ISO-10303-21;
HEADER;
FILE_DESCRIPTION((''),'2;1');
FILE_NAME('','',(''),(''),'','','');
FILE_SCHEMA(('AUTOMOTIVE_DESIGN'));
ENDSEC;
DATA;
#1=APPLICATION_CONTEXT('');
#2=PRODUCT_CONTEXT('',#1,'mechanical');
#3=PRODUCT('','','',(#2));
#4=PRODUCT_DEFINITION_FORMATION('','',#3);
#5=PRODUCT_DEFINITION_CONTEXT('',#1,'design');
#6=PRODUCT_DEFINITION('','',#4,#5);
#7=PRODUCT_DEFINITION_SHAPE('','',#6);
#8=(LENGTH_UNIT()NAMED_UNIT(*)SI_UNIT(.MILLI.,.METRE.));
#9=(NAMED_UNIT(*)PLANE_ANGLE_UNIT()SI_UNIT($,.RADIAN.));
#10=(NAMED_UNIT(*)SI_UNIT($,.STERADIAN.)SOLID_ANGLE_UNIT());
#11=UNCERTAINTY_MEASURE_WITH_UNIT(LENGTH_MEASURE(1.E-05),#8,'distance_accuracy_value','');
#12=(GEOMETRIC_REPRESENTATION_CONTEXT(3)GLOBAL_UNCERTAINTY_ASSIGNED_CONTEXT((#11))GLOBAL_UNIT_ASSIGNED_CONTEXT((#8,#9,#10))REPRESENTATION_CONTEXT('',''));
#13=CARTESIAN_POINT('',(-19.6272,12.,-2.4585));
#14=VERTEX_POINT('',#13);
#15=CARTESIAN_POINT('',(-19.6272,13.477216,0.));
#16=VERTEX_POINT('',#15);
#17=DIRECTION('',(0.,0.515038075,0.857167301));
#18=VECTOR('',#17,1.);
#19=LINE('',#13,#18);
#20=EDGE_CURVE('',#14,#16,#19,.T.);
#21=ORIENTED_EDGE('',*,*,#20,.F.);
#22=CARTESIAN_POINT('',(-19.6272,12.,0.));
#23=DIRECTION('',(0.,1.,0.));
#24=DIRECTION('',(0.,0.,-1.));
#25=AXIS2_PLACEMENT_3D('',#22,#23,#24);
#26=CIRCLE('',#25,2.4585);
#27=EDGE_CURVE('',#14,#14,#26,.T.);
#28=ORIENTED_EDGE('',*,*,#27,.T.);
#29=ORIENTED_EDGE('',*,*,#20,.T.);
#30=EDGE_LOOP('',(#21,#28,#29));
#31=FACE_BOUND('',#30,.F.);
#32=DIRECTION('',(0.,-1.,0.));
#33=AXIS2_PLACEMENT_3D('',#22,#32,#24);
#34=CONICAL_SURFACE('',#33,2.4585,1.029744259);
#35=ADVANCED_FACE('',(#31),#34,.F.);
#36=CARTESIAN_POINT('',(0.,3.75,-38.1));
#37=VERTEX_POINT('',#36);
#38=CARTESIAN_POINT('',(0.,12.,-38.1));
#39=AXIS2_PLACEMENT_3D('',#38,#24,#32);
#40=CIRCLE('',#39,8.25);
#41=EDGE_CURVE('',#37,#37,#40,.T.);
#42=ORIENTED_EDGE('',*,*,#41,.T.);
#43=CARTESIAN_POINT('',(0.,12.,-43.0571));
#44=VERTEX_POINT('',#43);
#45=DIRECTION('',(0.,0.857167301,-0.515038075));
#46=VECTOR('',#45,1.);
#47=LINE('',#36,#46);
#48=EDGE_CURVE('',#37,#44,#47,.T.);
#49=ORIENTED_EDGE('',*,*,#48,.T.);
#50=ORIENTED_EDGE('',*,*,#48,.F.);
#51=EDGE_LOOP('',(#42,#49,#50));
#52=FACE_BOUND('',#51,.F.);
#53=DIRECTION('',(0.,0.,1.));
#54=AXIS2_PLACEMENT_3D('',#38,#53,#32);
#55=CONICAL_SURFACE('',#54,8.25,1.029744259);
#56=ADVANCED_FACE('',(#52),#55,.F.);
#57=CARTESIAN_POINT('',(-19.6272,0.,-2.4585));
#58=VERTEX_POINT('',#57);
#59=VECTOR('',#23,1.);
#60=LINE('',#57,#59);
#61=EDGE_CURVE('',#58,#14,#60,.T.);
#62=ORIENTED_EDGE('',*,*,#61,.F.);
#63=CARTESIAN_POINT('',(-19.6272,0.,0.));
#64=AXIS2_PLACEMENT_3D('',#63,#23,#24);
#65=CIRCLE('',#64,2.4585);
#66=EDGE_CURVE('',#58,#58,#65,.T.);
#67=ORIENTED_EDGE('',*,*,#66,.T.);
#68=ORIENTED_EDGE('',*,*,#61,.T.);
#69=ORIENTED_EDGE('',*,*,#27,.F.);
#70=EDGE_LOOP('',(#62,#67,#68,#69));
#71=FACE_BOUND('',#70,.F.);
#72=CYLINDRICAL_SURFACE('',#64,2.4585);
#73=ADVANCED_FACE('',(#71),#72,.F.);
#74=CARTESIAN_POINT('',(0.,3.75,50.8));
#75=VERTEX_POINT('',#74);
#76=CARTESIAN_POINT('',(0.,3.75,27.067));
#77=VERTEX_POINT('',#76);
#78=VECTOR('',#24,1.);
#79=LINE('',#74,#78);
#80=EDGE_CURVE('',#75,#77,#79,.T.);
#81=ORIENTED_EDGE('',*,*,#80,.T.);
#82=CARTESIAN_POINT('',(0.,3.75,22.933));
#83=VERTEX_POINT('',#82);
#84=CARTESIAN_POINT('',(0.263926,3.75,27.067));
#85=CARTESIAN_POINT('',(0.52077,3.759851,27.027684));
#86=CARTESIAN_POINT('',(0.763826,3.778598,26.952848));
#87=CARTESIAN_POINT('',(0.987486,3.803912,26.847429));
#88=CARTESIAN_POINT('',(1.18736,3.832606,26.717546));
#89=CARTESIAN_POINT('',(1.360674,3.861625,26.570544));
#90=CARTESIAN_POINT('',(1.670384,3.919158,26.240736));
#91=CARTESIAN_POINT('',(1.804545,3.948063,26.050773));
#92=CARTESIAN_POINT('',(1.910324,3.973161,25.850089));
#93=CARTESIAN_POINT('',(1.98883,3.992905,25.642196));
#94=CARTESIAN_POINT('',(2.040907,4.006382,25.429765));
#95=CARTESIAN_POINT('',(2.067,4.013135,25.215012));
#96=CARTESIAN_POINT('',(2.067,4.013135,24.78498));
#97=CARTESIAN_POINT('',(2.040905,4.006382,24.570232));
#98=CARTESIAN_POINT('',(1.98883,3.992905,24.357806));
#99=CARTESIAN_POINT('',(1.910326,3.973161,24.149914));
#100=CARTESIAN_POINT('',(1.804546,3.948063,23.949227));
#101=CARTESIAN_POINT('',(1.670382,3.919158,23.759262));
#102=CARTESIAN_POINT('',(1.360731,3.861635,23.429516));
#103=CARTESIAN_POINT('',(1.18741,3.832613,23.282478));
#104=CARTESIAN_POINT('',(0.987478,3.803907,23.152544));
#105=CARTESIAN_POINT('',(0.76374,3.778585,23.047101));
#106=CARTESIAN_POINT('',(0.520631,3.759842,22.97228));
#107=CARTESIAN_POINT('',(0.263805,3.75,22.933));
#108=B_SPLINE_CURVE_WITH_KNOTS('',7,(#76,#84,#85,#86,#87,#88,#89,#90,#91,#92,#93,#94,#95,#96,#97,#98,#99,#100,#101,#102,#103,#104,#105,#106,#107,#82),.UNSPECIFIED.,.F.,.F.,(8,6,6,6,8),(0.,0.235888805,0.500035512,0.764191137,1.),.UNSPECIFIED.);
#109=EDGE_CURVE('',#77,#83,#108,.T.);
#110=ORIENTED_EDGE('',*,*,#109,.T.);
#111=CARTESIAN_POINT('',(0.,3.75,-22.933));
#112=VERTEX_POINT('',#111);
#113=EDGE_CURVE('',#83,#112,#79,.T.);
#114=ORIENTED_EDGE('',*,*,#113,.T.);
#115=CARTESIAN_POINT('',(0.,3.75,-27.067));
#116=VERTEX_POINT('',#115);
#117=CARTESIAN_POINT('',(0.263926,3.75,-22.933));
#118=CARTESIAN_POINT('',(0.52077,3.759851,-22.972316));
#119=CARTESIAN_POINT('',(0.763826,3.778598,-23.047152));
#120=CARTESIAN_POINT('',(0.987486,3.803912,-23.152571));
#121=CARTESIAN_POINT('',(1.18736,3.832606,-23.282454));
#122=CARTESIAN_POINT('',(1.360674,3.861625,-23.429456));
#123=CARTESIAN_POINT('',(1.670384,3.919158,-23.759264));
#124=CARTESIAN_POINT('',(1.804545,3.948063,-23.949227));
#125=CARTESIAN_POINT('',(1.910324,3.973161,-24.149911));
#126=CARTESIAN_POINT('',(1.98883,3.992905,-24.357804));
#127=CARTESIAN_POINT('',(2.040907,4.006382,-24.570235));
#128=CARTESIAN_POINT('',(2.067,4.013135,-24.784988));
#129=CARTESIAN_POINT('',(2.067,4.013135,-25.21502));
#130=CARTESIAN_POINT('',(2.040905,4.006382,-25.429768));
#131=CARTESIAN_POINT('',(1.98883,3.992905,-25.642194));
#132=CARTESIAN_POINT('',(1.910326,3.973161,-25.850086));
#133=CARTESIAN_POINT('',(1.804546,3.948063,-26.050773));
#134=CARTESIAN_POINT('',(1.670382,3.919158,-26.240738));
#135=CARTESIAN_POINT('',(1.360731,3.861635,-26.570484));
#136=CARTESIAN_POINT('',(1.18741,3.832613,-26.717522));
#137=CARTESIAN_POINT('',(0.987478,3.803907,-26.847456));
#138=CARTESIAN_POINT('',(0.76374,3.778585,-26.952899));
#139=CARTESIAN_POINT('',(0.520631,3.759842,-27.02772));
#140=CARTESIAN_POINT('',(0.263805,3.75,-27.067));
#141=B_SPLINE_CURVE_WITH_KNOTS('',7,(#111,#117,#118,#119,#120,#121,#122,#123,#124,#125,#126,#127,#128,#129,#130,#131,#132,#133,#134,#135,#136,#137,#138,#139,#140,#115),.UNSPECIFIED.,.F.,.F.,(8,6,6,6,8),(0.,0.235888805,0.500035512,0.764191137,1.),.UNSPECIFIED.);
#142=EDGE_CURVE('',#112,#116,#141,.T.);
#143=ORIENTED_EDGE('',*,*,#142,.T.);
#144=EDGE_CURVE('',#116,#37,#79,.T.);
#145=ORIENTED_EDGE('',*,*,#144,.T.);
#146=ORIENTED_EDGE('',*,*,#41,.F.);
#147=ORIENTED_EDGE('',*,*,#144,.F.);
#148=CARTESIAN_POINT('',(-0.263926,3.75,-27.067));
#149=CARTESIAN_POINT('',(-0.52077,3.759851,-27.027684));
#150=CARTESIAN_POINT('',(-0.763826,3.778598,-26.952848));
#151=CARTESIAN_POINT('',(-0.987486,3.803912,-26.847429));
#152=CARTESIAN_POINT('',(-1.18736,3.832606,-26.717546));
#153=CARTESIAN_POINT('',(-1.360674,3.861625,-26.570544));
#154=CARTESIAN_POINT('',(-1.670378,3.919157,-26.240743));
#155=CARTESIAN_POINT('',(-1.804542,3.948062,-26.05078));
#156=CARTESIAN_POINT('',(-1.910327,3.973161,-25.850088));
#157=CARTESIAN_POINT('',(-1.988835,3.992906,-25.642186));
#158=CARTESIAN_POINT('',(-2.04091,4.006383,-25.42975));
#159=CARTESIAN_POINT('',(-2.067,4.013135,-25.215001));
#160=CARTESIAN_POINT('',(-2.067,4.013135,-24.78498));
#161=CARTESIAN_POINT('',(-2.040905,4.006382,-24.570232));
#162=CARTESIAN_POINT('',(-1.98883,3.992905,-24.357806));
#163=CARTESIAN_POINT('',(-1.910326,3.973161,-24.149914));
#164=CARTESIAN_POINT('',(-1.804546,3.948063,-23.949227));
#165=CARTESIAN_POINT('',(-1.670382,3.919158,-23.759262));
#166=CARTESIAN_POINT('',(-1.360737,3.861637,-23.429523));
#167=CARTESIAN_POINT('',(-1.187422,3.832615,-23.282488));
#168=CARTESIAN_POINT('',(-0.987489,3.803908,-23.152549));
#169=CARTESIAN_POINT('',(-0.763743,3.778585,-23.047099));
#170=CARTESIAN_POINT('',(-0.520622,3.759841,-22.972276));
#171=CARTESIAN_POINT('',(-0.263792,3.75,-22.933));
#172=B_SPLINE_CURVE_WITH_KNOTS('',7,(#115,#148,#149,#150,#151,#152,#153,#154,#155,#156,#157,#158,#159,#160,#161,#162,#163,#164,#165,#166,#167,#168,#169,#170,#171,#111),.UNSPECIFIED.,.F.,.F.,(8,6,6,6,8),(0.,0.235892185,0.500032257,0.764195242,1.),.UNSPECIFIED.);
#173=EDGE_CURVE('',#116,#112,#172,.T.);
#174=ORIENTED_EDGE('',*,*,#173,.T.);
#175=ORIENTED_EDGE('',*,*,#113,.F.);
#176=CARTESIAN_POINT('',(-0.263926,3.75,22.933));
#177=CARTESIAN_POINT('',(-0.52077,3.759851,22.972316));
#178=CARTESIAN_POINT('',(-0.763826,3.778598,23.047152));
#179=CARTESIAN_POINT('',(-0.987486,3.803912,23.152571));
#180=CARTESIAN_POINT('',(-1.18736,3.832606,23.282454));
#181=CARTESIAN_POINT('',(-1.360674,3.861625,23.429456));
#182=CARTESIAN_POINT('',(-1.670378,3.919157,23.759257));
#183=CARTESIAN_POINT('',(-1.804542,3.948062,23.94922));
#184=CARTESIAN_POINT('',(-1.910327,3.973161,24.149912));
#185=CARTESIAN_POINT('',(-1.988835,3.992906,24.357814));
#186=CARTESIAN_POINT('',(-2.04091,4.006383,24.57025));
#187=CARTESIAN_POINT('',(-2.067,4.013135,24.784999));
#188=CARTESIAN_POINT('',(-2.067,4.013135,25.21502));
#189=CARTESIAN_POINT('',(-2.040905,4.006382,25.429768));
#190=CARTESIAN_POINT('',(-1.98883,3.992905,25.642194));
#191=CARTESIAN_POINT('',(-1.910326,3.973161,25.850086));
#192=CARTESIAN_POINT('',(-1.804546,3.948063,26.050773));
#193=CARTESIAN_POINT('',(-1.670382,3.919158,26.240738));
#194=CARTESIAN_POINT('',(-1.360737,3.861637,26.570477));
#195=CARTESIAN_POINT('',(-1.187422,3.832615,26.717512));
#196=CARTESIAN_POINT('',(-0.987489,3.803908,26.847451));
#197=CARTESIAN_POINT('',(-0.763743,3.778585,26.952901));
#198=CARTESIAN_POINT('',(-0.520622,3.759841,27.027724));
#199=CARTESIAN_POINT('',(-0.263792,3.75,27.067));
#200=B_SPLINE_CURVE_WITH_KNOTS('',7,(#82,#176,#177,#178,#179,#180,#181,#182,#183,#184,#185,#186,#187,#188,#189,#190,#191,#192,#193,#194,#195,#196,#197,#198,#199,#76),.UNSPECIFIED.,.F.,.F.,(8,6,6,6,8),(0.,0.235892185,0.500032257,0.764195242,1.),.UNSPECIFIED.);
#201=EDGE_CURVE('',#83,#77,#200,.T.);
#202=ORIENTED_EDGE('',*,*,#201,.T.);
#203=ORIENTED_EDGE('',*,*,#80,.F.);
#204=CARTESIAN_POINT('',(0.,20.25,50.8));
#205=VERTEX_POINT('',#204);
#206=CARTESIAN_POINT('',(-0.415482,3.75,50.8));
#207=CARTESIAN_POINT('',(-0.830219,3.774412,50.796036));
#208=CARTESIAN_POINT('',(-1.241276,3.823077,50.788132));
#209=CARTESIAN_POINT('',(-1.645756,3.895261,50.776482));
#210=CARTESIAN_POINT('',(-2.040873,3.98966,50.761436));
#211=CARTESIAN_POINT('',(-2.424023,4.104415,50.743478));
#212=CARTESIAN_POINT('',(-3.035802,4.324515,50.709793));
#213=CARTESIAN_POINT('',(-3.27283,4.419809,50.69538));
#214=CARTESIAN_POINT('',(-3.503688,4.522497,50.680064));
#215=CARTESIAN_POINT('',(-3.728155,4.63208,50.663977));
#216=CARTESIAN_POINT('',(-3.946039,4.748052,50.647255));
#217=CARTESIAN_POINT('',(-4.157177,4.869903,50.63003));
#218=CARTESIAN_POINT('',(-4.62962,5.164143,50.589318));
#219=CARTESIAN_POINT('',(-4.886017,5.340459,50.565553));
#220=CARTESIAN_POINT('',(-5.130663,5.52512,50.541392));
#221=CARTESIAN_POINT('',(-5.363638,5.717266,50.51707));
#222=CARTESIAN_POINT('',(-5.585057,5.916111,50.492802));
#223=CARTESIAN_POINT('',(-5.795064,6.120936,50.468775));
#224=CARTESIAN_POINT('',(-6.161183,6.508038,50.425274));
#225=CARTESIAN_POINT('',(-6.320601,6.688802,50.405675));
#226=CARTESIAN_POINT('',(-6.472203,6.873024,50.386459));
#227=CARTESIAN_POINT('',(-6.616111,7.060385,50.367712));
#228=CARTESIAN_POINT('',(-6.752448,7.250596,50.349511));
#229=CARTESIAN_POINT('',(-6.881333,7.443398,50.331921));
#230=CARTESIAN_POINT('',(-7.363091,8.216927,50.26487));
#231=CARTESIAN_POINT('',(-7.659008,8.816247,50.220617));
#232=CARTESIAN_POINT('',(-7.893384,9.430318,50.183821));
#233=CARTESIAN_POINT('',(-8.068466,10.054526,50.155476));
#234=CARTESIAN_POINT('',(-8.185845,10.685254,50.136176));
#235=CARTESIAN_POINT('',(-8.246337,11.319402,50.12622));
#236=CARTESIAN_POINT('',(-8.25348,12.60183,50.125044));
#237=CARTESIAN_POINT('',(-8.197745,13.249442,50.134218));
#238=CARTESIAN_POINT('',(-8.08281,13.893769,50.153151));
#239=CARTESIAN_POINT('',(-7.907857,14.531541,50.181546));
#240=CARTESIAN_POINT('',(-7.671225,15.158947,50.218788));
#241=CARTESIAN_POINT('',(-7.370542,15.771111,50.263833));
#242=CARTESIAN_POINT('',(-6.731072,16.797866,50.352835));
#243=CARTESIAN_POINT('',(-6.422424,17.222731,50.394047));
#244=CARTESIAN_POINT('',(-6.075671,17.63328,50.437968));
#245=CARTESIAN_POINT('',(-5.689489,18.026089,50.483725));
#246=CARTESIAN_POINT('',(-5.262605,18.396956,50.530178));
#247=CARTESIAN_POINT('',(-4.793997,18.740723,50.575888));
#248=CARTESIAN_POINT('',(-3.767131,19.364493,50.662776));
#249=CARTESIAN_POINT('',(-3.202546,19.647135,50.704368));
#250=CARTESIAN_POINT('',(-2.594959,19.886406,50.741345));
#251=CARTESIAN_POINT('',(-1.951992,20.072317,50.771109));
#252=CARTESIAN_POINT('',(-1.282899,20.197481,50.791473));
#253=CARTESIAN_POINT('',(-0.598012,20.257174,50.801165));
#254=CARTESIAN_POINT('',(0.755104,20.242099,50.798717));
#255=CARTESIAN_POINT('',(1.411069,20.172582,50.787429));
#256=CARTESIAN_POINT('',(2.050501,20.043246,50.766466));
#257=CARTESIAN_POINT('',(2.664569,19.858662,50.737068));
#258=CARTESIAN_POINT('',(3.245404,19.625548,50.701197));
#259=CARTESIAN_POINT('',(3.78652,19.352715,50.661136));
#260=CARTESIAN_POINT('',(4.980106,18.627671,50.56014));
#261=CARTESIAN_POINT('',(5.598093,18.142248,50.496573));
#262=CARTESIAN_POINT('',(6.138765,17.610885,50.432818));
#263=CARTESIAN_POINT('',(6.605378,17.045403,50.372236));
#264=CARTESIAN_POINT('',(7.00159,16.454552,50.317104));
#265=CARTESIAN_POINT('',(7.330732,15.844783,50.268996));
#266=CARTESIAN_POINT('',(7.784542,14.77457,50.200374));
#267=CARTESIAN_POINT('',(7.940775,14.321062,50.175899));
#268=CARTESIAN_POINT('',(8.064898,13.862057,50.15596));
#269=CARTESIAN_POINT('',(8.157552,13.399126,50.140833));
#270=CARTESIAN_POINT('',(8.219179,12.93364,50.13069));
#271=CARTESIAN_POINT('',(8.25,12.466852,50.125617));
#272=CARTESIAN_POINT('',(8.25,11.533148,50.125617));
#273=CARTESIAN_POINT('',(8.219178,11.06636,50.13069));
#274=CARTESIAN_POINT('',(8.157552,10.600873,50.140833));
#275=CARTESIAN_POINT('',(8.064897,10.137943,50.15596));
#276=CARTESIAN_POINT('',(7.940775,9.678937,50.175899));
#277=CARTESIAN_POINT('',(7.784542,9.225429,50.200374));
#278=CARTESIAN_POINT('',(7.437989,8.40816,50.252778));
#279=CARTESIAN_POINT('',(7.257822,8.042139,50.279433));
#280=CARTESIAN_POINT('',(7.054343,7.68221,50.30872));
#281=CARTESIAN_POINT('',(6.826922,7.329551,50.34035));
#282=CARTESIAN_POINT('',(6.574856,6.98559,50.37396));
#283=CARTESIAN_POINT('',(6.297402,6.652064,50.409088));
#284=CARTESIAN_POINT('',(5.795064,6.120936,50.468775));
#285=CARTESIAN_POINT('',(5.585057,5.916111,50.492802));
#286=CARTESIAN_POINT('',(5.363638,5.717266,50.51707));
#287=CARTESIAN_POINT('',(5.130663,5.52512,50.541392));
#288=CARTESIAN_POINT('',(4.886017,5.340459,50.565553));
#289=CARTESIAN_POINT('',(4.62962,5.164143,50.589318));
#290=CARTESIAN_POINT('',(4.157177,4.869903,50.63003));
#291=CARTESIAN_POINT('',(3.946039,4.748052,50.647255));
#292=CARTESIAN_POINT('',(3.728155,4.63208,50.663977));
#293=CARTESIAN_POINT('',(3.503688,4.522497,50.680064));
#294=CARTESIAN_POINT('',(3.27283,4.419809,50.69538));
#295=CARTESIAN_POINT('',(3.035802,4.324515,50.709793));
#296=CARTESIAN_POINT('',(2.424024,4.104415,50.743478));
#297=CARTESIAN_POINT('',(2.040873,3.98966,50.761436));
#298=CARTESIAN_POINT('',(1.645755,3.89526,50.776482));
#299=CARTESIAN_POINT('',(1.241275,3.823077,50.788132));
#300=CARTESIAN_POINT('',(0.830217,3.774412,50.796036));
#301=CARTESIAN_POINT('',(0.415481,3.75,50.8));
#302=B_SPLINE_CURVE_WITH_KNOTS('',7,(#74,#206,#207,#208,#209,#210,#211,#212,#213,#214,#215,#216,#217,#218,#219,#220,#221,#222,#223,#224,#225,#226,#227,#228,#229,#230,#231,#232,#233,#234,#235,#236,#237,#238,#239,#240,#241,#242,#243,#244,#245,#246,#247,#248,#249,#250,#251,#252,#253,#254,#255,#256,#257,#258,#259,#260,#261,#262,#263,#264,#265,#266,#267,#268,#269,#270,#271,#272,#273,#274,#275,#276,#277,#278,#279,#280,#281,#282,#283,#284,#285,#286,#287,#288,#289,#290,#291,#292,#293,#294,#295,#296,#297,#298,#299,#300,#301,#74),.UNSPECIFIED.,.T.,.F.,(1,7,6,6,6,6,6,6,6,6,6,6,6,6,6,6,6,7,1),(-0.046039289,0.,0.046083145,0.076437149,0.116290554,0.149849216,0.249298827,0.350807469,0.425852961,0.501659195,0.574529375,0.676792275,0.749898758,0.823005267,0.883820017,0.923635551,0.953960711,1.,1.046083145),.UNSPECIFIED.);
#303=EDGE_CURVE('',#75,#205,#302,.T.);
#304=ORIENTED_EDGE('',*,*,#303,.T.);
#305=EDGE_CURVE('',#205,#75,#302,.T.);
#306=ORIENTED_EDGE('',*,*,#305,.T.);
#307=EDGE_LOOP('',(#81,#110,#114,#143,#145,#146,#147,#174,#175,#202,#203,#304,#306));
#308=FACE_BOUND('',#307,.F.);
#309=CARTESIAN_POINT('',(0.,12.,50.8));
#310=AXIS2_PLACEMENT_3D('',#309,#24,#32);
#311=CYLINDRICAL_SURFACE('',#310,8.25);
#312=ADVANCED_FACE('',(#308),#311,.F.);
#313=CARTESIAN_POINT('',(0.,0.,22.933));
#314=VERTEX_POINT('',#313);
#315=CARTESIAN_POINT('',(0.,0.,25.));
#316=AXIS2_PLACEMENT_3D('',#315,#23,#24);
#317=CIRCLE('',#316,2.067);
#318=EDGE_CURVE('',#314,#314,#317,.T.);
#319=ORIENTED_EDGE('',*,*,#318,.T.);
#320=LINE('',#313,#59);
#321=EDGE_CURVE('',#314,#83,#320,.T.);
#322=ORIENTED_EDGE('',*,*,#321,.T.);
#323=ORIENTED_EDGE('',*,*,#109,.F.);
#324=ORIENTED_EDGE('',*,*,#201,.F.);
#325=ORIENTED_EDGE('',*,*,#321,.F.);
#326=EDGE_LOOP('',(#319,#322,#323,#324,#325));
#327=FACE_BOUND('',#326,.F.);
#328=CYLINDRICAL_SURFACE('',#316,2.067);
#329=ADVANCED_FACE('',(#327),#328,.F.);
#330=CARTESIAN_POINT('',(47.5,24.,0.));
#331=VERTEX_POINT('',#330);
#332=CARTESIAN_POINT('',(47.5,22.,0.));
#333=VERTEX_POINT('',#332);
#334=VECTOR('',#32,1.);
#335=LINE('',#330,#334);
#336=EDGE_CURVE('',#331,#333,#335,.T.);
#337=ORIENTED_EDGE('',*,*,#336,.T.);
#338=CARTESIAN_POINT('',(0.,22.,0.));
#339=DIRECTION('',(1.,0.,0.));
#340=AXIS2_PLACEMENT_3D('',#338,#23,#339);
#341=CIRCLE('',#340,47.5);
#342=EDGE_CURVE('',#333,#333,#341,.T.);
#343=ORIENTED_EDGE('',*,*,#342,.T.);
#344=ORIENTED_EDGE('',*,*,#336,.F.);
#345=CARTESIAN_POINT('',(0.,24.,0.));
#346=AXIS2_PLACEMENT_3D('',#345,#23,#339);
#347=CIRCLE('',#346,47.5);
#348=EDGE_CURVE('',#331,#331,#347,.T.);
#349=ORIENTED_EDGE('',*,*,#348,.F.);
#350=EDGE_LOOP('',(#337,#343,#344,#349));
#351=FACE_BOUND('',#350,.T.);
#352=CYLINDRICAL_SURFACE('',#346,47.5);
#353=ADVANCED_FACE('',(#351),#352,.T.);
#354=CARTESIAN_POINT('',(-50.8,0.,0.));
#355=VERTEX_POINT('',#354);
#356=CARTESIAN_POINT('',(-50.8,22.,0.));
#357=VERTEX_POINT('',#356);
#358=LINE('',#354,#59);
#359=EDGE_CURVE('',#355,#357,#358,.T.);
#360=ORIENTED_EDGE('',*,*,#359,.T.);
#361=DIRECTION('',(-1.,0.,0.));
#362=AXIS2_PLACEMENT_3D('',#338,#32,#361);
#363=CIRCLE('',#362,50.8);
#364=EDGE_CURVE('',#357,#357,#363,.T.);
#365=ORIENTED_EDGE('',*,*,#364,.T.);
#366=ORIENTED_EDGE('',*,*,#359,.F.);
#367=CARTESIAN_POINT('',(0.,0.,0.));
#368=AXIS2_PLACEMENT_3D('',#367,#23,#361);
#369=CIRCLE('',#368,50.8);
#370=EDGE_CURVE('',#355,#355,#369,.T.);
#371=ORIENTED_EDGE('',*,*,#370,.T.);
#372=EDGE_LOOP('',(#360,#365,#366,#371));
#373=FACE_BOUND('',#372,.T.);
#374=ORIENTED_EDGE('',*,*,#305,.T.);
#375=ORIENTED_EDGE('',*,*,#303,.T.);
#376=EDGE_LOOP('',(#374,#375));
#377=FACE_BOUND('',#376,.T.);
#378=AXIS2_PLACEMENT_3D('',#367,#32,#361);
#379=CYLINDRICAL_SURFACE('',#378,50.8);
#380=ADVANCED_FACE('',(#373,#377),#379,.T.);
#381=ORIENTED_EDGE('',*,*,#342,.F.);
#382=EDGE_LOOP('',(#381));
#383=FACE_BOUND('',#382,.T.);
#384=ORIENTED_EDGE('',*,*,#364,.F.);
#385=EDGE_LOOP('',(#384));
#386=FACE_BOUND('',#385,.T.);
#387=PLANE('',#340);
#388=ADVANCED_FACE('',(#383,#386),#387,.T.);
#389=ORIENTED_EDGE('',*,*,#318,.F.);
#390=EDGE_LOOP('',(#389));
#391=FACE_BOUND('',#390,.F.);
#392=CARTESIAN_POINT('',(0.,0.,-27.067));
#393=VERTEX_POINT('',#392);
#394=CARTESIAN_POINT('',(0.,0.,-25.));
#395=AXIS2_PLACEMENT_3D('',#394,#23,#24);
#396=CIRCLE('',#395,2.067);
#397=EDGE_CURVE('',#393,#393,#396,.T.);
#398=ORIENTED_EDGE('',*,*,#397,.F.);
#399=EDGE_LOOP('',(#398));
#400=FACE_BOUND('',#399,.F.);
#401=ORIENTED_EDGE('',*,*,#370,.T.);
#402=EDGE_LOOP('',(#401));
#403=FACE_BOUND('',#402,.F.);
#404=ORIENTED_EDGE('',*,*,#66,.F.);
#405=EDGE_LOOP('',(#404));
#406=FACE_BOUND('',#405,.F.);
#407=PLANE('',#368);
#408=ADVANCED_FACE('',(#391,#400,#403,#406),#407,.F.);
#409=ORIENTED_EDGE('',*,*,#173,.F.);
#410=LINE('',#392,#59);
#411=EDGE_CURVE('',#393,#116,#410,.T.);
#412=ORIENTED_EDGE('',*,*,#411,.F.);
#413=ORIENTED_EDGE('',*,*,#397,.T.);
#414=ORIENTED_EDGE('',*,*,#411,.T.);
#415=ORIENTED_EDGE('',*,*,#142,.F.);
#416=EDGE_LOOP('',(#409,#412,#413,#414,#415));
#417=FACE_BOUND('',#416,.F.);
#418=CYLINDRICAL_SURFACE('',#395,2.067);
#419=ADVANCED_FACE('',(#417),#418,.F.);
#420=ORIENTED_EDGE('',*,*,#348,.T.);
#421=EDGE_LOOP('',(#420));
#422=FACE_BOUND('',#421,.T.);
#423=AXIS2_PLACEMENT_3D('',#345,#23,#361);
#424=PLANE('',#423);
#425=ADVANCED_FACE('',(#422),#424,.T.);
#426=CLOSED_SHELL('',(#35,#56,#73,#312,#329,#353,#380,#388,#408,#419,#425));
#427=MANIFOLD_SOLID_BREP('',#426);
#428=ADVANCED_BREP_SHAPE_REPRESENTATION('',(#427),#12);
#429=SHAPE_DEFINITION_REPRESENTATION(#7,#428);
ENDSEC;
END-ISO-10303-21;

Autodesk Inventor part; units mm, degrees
ref_plane "YZ Plane" through (0, 0, 0) normal (1, 0, 0) x (0, 1, 0)
ref_plane "XZ Plane" through (0, 0, 0) normal (0, 1, 0) x (-1, 0, 0)
sketch "Sketch1" plane through (0, 0, 0) normal (0, 1, 0) x (-1, 0, 0)
  circle A0 centre (0, 0) radius 50.8
  dimension "d0" = 101.6
extrude "Extrusion1" add sketch "Sketch1" along normal blind 24
ref_plane "Work Plane1" through (0, 0, 50.8) normal (0, 0, 1) x (1, 0, 0)
sketch "Sketch3" plane through (0, 0, 50.8) normal (0, 0, 1) x (1, 0, 0)
  line L0 (50.8, 24) -> (-50.8, 24) projected
  line L1 (0, 24) -> (0, 12) construction
  point P0 (0, 0)
  dimension "d7" = 12
hole "Hole1" at (0, 12, 50.8) direction (0, 0, -1) diameter 16.5 depth 88.9 tip angle 118
sketch "Sketch4" plane through (0, 0, 0) normal (0, -1, 0) x (1, 0, 0)
  line L0 (0, 0) -> (0, -25) construction
  line L1 (0, 0) -> (0, 25) construction
  dimension "d15" = 25
  dimension "d16" = 25
hole "Hole2" at (0, 0, 25) at (0, 0, -25) direction (0, 1, 0) diameter 4.134 end up to surface thread size "M5x0.8" class "6H" standard "ANSI Metric M Profile"
sketch "Sketch5" plane through (0, 0, 0) normal (0, -1, 0) x (1, 0, 0)
  point P0 (0, 0)
  point P1 (-19.6272, 0)
hole "Hole3" at (-19.6272, 0, 0) direction (0, 1, 0) diameter 4.917 depth 12 tip angle 118 thread size "M6x1" class "6H" standard "ANSI Metric M Profile"
ref_plane "Work Plane2" through (0, 0, -38.1) normal (0, 0, 1) x (1, 0, 0)
sketch "Sketch7" plane through (0, 24, 0) normal (0, 1, 0) x (1, 0, 0)
  circle A0 centre (0, 0) radius 50.8
  circle A1 centre (0, 0) radius 47.5
  dimension "d35" = 101.6
  dimension "d36" = 95
extrude "Extrusion4" cut sketch "Sketch7" against normal blind 2
properties part number "Platogrueso" material "Aluminum 6061"
